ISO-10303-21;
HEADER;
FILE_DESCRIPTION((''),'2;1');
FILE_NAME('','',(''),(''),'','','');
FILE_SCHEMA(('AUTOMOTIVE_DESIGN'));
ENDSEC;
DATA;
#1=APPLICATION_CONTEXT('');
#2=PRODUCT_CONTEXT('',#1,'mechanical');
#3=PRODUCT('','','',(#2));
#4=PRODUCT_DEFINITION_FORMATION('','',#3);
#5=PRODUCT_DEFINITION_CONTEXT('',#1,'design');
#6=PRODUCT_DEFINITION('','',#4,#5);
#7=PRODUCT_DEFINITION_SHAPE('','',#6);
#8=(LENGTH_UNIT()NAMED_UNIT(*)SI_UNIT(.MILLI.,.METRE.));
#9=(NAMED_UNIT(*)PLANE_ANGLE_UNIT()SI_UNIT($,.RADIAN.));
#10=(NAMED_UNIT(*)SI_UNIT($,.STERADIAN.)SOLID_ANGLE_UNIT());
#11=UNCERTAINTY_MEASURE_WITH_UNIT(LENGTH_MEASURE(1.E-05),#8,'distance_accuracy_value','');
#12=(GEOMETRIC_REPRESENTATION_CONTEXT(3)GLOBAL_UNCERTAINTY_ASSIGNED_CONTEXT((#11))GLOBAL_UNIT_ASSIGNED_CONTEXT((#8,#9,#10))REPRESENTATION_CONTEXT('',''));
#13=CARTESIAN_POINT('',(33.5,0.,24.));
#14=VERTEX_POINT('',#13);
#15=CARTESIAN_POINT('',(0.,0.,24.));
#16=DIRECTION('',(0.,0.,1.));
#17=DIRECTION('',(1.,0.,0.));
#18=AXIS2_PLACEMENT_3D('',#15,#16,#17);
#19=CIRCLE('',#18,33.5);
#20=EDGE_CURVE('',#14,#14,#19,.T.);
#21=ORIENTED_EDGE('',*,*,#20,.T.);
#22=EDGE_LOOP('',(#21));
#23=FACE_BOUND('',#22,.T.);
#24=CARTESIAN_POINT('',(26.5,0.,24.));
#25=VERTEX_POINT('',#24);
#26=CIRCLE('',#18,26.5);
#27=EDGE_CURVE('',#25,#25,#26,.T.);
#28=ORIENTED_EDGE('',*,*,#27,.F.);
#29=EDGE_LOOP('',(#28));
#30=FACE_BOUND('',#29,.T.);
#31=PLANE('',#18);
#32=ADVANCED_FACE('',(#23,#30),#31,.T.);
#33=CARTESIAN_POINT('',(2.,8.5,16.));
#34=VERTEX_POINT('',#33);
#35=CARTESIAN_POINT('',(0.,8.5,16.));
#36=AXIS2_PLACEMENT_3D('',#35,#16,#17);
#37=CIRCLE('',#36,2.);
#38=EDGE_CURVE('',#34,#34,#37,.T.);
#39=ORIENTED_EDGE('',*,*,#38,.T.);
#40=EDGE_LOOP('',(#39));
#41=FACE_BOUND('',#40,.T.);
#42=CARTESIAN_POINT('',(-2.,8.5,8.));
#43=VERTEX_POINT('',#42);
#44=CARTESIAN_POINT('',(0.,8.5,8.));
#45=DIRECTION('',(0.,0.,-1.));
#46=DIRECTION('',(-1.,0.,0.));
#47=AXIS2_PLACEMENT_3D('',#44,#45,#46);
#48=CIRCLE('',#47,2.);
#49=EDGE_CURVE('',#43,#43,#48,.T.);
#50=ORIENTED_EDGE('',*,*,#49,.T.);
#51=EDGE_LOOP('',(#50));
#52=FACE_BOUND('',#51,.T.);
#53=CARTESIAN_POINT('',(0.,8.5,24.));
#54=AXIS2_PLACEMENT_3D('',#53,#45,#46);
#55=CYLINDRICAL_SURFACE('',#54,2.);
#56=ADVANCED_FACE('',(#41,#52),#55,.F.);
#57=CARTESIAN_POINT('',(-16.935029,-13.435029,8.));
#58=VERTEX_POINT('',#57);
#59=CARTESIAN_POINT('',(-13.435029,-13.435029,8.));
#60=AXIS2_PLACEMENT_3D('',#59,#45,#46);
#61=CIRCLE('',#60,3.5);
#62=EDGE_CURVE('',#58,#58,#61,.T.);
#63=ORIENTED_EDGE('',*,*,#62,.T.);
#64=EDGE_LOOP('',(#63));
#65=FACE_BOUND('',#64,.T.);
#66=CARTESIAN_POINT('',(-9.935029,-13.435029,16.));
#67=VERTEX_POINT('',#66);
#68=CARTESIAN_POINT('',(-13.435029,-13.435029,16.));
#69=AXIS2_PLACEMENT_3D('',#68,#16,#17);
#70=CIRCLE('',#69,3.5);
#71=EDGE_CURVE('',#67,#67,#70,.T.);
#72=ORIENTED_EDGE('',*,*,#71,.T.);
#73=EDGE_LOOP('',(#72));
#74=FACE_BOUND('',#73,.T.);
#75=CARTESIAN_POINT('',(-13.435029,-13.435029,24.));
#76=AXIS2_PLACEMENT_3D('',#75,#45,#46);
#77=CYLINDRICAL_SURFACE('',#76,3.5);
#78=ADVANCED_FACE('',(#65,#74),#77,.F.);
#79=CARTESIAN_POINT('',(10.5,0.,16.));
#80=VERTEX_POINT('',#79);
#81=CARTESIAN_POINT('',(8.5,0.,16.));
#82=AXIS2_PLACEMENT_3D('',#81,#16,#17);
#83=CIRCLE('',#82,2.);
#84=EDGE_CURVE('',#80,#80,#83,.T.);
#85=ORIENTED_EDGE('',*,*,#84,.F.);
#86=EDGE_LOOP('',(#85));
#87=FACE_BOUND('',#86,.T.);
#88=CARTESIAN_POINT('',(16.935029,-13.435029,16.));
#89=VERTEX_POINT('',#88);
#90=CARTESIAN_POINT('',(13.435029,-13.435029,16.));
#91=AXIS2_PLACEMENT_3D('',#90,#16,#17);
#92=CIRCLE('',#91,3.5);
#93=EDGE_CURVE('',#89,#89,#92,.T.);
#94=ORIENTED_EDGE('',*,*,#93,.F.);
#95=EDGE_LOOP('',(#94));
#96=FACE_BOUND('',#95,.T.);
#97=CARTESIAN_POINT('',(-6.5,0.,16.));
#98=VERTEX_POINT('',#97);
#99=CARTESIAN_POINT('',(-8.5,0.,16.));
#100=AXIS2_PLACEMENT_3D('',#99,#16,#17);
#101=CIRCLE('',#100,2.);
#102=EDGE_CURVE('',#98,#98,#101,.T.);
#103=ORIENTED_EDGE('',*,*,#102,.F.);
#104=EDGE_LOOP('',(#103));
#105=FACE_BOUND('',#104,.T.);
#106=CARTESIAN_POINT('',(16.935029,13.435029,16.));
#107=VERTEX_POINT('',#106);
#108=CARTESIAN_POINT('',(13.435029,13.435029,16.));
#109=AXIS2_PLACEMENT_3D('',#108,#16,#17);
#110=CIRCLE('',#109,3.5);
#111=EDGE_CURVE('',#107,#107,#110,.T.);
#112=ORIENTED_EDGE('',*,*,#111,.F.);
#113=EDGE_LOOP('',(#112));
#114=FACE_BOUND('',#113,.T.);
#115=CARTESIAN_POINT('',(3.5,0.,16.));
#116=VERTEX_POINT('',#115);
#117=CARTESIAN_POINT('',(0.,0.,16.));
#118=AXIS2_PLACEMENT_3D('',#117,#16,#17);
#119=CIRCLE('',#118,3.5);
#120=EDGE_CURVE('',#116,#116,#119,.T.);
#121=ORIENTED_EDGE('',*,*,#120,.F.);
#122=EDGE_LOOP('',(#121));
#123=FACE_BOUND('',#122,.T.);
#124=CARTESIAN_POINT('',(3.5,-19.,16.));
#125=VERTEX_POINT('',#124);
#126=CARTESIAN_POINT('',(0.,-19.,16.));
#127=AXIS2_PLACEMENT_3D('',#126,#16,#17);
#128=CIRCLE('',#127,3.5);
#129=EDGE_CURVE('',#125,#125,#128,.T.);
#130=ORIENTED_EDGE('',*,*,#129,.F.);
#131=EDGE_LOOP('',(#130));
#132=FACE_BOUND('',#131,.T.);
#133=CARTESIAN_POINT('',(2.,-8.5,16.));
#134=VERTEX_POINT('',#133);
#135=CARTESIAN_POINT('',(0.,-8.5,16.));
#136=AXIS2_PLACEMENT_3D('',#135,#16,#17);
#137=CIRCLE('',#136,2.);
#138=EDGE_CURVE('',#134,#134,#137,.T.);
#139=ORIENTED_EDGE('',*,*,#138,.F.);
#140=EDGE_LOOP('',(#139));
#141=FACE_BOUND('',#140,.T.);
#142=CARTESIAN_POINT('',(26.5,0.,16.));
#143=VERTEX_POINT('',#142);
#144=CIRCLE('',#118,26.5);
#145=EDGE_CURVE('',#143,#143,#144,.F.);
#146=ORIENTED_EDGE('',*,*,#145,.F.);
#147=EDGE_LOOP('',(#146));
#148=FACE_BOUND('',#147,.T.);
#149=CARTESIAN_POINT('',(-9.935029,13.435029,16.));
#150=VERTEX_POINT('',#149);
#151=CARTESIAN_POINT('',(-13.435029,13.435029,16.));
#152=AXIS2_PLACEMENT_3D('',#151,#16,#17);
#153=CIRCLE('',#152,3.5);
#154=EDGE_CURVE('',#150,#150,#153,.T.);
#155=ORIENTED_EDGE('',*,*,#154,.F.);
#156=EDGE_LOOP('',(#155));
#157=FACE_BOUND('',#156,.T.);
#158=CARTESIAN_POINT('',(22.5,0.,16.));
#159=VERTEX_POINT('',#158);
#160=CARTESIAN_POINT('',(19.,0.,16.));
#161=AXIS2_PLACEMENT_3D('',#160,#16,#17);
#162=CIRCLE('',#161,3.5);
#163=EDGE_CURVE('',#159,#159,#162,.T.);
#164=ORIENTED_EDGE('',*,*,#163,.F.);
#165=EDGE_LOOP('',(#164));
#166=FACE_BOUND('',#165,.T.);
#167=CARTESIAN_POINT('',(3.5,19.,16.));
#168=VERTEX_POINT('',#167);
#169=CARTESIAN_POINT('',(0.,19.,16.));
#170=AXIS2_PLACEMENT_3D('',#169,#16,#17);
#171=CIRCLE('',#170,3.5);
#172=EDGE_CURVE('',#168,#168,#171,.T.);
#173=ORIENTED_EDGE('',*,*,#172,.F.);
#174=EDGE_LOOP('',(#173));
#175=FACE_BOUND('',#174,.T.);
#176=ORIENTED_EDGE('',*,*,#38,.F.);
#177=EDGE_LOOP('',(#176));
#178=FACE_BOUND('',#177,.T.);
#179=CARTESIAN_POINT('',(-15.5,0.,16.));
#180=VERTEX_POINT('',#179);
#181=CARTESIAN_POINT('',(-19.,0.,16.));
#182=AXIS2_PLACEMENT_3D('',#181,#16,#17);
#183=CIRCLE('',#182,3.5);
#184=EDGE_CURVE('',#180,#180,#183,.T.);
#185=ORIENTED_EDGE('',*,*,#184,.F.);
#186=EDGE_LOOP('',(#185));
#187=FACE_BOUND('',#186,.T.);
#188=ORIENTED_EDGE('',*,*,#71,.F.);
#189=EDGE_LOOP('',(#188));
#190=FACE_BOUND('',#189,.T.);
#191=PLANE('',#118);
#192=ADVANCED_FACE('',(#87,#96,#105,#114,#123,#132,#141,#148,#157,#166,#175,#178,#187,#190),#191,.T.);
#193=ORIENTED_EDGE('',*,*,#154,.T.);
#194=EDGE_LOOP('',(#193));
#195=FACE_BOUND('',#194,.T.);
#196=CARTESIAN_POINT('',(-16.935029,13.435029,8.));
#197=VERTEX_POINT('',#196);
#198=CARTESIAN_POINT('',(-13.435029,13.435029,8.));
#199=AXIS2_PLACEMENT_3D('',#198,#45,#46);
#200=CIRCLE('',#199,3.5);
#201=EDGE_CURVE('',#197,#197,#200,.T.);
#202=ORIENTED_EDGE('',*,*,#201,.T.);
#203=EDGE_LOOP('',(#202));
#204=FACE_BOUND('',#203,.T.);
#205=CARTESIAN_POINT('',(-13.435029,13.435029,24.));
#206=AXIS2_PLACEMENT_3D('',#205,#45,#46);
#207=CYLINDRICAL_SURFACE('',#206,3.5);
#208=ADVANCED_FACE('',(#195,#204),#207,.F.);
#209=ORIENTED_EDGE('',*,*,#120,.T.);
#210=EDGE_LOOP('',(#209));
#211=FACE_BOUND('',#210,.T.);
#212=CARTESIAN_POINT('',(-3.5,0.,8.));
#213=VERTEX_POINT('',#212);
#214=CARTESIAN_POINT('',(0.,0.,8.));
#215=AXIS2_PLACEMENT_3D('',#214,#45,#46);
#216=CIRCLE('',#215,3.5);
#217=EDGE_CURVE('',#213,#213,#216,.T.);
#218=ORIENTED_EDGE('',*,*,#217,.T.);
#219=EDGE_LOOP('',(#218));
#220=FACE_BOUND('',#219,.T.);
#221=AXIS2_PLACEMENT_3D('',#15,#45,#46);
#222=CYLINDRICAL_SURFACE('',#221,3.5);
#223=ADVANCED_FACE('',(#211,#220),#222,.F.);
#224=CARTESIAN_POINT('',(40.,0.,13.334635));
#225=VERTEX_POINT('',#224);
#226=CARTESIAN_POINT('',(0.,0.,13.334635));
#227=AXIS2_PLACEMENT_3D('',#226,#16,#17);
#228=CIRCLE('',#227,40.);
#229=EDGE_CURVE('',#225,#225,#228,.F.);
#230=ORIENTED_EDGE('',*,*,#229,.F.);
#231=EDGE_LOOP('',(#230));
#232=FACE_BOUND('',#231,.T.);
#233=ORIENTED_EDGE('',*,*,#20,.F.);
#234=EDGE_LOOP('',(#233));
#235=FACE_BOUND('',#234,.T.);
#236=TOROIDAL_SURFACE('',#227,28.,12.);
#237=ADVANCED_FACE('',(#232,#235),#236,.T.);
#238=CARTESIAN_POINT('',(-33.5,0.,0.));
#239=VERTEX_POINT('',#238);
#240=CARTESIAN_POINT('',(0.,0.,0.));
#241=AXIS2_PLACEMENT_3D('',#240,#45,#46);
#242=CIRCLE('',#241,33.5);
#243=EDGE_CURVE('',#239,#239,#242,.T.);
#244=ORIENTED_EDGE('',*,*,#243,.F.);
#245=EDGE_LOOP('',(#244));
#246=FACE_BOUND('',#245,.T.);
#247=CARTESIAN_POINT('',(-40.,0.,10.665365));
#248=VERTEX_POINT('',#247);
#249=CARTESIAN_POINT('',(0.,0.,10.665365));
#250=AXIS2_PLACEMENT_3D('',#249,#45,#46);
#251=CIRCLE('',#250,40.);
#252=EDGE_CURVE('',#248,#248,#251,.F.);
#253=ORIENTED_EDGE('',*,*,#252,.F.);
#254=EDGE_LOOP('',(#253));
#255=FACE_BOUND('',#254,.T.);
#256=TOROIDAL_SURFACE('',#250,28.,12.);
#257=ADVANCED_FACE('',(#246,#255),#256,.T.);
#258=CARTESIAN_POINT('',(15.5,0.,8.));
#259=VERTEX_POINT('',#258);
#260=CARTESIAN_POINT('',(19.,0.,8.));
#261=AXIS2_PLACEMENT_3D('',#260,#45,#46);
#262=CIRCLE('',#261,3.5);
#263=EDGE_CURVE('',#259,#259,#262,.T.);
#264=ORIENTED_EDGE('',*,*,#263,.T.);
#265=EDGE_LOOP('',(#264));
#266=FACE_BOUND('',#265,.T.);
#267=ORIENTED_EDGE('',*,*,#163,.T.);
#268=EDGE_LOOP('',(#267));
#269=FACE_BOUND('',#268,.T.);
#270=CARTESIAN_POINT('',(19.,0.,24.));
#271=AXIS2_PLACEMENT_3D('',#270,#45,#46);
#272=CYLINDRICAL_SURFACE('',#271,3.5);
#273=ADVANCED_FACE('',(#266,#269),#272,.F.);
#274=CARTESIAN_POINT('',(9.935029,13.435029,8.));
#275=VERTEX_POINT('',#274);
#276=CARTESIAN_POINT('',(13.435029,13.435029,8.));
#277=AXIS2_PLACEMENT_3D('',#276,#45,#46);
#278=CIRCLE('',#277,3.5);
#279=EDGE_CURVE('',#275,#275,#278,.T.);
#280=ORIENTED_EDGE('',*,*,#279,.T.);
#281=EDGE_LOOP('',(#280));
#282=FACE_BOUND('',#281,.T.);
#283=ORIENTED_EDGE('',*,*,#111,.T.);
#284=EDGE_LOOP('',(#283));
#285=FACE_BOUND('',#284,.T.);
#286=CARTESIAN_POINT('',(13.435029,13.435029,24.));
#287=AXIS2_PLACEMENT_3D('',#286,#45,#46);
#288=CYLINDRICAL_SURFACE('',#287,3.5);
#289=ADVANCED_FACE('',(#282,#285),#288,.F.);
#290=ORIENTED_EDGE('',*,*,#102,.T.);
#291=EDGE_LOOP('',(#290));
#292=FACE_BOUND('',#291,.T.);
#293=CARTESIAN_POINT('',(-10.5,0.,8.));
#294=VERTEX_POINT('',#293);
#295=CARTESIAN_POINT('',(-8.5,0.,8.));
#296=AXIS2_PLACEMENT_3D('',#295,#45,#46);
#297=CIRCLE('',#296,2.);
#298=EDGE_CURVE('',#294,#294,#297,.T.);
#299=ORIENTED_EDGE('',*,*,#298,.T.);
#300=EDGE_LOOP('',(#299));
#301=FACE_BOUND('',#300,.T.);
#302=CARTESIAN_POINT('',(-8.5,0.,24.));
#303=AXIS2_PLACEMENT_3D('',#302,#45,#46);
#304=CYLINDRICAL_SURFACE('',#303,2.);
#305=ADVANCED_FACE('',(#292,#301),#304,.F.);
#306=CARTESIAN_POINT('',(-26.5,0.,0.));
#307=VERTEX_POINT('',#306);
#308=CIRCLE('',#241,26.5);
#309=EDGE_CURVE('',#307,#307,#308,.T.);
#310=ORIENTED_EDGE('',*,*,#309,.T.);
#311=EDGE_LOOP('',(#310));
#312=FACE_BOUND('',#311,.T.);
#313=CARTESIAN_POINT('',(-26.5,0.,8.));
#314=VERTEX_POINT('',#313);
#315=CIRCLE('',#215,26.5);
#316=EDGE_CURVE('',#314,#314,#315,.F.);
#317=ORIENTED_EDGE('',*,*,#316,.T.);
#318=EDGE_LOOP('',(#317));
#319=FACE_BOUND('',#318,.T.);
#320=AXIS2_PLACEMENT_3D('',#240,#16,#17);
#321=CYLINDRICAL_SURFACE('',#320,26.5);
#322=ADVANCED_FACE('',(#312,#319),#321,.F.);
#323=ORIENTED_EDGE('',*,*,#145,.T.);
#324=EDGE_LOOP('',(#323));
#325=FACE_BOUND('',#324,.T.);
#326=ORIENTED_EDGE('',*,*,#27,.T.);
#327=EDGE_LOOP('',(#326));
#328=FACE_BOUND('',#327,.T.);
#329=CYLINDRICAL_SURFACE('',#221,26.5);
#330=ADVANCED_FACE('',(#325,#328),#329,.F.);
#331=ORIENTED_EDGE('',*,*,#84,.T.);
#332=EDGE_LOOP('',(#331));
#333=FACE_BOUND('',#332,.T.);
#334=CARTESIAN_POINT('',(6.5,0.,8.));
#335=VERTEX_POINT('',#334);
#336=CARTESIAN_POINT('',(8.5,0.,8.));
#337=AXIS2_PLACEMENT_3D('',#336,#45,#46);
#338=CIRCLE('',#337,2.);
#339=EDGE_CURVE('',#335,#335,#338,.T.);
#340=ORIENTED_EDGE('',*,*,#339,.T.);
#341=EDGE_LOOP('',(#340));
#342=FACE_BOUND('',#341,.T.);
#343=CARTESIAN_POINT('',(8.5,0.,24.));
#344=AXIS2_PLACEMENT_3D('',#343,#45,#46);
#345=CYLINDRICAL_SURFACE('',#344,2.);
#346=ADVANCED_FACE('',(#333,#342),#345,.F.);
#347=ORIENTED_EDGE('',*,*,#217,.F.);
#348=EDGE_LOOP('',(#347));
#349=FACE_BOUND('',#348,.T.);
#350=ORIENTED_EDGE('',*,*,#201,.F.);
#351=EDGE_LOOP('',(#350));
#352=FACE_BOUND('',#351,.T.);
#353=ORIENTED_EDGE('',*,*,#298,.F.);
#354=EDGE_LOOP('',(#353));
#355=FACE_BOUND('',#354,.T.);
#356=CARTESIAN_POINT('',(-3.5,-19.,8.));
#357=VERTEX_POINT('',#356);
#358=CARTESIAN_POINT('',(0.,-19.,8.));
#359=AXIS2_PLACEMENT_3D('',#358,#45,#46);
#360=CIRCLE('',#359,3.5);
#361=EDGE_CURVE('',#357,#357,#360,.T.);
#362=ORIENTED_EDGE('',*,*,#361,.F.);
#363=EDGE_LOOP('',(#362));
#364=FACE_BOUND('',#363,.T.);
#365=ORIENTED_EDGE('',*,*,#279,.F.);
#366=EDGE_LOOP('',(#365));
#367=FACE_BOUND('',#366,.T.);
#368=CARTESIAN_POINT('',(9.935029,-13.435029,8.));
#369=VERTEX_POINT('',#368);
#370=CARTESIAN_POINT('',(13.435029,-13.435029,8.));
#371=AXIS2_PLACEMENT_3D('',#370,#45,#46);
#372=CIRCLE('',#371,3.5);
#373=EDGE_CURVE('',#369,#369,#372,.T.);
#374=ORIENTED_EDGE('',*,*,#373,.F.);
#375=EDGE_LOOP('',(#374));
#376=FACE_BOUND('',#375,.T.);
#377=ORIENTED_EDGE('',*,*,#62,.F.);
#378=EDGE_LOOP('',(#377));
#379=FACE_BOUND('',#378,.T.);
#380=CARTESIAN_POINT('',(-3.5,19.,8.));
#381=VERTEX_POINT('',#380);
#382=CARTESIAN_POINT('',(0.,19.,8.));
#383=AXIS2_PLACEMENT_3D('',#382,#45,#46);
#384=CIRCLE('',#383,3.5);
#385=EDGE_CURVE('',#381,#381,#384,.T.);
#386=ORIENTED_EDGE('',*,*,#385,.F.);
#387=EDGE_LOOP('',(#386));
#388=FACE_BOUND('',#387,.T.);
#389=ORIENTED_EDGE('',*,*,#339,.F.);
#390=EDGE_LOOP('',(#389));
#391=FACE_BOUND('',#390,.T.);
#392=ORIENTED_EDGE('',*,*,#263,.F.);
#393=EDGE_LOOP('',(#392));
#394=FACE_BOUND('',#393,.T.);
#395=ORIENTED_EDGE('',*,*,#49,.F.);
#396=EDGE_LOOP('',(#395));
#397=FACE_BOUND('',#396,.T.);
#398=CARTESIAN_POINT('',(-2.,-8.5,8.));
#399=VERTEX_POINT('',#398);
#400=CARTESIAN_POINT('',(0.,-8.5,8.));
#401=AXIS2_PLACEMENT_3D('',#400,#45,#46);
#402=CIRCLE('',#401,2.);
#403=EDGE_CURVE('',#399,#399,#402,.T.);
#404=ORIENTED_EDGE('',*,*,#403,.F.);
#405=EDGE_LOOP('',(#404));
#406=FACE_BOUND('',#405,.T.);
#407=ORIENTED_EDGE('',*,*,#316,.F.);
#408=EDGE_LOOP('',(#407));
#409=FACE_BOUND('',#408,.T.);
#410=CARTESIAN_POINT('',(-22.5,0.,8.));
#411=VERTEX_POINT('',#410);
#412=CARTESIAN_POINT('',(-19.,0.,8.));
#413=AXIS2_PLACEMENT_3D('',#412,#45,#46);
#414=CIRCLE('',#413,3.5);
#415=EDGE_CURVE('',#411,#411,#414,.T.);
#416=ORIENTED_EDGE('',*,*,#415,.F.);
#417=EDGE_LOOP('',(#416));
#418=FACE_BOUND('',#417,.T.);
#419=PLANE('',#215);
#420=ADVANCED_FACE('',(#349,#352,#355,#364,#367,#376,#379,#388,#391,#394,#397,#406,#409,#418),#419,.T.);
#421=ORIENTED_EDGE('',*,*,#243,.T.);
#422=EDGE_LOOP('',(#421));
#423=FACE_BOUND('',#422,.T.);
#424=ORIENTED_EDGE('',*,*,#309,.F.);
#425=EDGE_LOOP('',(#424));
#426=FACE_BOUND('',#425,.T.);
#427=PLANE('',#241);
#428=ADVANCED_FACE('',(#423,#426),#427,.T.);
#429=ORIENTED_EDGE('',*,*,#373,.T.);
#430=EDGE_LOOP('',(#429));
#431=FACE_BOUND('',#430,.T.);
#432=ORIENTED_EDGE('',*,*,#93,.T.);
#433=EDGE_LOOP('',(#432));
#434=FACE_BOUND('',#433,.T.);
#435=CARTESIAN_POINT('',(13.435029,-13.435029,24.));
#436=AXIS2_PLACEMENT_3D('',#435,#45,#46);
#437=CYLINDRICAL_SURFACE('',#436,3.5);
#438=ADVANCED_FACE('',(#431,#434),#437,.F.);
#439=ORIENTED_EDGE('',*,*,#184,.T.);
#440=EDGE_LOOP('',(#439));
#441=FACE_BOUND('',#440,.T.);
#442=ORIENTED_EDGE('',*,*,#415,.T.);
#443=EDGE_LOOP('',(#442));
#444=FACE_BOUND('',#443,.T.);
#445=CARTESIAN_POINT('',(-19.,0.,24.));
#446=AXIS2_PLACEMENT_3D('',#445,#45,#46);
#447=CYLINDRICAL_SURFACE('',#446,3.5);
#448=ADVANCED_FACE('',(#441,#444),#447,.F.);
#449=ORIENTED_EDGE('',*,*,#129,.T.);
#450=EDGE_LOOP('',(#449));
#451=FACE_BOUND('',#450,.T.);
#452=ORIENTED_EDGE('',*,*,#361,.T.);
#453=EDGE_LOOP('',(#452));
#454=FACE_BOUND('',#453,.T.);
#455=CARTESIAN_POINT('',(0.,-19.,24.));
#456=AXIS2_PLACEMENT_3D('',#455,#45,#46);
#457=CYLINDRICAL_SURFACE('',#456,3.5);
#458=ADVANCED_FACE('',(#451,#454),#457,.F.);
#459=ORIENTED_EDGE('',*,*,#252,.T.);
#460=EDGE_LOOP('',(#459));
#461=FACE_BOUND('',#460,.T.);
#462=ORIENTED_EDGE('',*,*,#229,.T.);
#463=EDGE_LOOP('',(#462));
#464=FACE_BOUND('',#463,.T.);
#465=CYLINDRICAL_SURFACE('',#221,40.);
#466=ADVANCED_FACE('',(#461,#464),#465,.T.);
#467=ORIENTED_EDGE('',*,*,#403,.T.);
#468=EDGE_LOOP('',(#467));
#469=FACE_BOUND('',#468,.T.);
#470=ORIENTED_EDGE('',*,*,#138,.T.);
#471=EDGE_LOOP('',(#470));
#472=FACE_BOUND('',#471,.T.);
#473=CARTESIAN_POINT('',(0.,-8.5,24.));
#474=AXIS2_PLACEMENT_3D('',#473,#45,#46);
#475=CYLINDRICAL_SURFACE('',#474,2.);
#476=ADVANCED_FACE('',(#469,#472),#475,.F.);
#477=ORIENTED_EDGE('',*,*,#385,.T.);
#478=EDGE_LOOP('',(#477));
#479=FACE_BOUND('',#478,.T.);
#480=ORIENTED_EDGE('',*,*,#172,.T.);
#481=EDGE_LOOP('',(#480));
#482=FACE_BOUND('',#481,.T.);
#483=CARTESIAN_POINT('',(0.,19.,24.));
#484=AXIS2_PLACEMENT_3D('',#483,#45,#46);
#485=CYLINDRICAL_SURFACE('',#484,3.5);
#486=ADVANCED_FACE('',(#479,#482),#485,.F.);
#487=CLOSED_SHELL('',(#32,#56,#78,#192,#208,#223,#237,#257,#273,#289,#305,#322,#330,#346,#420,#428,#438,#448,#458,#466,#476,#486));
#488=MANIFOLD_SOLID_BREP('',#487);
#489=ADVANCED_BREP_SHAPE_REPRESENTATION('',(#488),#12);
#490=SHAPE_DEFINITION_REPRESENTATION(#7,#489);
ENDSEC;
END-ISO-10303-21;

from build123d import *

# Parameters (mm, degrees)
ESQUISSE1_R             = 40
BOSS_EXTRU_1_DEPTH      = 24
ESQUISSE6_R             = 33.5
ENL_V_MAT_EXTRU_5_DEPTH = 8
ENL_V_START             = -8
ESQUISSE3_R             = 33.5
ENL_V_MAT_EXTRU_6_DEPTH = 8
CONG_12_R               = 12
CONG_16_R               = 12
ESQUISSE11_R            = 33.5
ESQUISSE11_R_2          = 26.5
BOSS_EXTRU_3_DEPTH      = 8
BOSS_EXTRU_4_START      = 8
ESQUISSE13_R            = 33.5
ESQUISSE13_R_2          = 26.5
BOSS_EXTRU_4_DEPTH      = 8
ESQUISSE14_R            = 3.5
ESQUISSE14_R_2          = 2
ENL_V_MAT_EXTRU_7_DEPTH = 59.787753827


with BuildPart() as part:
    # Esquisse1 → Boss.-Extru.1 (new body)
    with BuildSketch(Plane.XY):
        Circle(ESQUISSE1_R)
    extrude(amount=BOSS_EXTRU_1_DEPTH)

    # Esquisse6 → Enlèv. mat.-Extru.5 (cut)
    with BuildSketch(Plane(origin=(0, 0, 0), x_dir=(-1, 0, 0), z_dir=(0, 0, -1))):
        Circle(ESQUISSE6_R)
    extrude(amount=-ENL_V_MAT_EXTRU_5_DEPTH, mode=Mode.SUBTRACT)

    # Esquisse3 → Enlèv. mat.-Extru.6 (cut)
    with BuildSketch(Plane.XY.offset(24).offset(ENL_V_START)):
        with Locations(Location((0, 0, 0), (0, 0, 180))):
            Circle(ESQUISSE3_R)
    extrude(amount=ENL_V_MAT_EXTRU_6_DEPTH, mode=Mode.SUBTRACT)

    # Congé12
    # the kernel refuses this fillet: 12 mm, written as the material it takes off along each edge
    with BuildSketch(Plane(origin=(0, 0, 0), x_dir=(1, 0, 0), z_dir=(0, -1, 0))) as cong_12_piece_1:
        with BuildLine():
            CenterArc((28, 10.665364504), CONG_12_R, 297.279612736, 62.720387264)
            Line((33.5, 0), (33.61, -0.21330729))
            ThreePointArc((33.61, -0.21330729), (36.75, -0.24), (40, -0.24))
            Line((40, -0.24), (40.24, 0))
            Line((40.24, 0), (40.24, 10.665364504))
            Line((40.24, 10.665364504), (40, 10.665364504))
        make_face()
    revolve(axis=Axis((0, 0, 0), (0, 0, 1)), mode=Mode.SUBTRACT)

    # Congé16
    # the kernel refuses this fillet: 12 mm, written as the material it takes off along each edge
    with BuildSketch(Plane(origin=(0, 0, 24), x_dir=(1, 0, 0), z_dir=(0, -1, 0))) as cong_16_piece_1:
        with BuildLine():
            CenterArc((28, -10.665364504), CONG_16_R, 0, 62.720387264)
            Line((33.5, 0), (33.61, 0.21330729))
            ThreePointArc((33.61, 0.21330729), (36.75, 0.24), (40, 0.24))
            Line((40, 0.24), (40.24, 0))
            Line((40.24, 0), (40.24, -10.665364504))
            Line((40.24, -10.665364504), (40, -10.665364504))
        make_face()
    revolve(axis=Axis((0, 0, 24), (0, 0, 1)), mode=Mode.SUBTRACT)

    # Esquisse11 → Boss.-Extru.3 (add)
    with BuildSketch(Plane.XY.offset(16)):
        with Locations(Location((0, 0, 0), (0, 0, 180))):
            Circle(ESQUISSE11_R)
        Circle(ESQUISSE11_R_2, mode=Mode.SUBTRACT)
    extrude(amount=BOSS_EXTRU_3_DEPTH)

    # Esquisse13 → Boss.-Extru.4 (add)
    with BuildSketch(Plane(origin=(0, 0, 8), x_dir=(-1, 0, 0), z_dir=(0, 0, -1)).offset(BOSS_EXTRU_4_START)):
        Circle(ESQUISSE13_R)
        with Locations(Location((0, 0, 0), (0, 0, 180))):
            Circle(ESQUISSE13_R_2, mode=Mode.SUBTRACT)
    extrude(amount=-BOSS_EXTRU_4_DEPTH)

    # Esquisse14 → Enlèv. mat.-Extru.7 (cut, through all)
    with BuildSketch(Plane(origin=(0, 0, 8), x_dir=(-1, 0, 0), z_dir=(0, 0, -1))):
        Circle(ESQUISSE14_R)
        with Locations((-8.5, 0)):
            Circle(ESQUISSE14_R_2)
        with Locations((-19, 0)):
            Circle(ESQUISSE14_R)
        with Locations((0, 8.5)):
            Circle(ESQUISSE14_R_2)
        with Locations((8.5, 0)):
            Circle(ESQUISSE14_R_2)
        with Locations((0, -8.5)):
            Circle(ESQUISSE14_R_2)
        with Locations((-13.435028843, 13.435028843)):
            Circle(ESQUISSE14_R)
        with Locations((0, 19)):
            Circle(ESQUISSE14_R)
        with Locations((13.435028843, 13.435028843)):
            Circle(ESQUISSE14_R)
        with Locations((19, 0)):
            Circle(ESQUISSE14_R)
        with Locations((13.435028843, -13.435028843)):
            Circle(ESQUISSE14_R)
        with Locations((0, -19)):
            Circle(ESQUISSE14_R)
        with Locations((-13.435028843, -13.435028843)):
            Circle(ESQUISSE14_R)
    extrude(amount=-ENL_V_MAT_EXTRU_7_DEPTH, mode=Mode.SUBTRACT)


solid = part.part
